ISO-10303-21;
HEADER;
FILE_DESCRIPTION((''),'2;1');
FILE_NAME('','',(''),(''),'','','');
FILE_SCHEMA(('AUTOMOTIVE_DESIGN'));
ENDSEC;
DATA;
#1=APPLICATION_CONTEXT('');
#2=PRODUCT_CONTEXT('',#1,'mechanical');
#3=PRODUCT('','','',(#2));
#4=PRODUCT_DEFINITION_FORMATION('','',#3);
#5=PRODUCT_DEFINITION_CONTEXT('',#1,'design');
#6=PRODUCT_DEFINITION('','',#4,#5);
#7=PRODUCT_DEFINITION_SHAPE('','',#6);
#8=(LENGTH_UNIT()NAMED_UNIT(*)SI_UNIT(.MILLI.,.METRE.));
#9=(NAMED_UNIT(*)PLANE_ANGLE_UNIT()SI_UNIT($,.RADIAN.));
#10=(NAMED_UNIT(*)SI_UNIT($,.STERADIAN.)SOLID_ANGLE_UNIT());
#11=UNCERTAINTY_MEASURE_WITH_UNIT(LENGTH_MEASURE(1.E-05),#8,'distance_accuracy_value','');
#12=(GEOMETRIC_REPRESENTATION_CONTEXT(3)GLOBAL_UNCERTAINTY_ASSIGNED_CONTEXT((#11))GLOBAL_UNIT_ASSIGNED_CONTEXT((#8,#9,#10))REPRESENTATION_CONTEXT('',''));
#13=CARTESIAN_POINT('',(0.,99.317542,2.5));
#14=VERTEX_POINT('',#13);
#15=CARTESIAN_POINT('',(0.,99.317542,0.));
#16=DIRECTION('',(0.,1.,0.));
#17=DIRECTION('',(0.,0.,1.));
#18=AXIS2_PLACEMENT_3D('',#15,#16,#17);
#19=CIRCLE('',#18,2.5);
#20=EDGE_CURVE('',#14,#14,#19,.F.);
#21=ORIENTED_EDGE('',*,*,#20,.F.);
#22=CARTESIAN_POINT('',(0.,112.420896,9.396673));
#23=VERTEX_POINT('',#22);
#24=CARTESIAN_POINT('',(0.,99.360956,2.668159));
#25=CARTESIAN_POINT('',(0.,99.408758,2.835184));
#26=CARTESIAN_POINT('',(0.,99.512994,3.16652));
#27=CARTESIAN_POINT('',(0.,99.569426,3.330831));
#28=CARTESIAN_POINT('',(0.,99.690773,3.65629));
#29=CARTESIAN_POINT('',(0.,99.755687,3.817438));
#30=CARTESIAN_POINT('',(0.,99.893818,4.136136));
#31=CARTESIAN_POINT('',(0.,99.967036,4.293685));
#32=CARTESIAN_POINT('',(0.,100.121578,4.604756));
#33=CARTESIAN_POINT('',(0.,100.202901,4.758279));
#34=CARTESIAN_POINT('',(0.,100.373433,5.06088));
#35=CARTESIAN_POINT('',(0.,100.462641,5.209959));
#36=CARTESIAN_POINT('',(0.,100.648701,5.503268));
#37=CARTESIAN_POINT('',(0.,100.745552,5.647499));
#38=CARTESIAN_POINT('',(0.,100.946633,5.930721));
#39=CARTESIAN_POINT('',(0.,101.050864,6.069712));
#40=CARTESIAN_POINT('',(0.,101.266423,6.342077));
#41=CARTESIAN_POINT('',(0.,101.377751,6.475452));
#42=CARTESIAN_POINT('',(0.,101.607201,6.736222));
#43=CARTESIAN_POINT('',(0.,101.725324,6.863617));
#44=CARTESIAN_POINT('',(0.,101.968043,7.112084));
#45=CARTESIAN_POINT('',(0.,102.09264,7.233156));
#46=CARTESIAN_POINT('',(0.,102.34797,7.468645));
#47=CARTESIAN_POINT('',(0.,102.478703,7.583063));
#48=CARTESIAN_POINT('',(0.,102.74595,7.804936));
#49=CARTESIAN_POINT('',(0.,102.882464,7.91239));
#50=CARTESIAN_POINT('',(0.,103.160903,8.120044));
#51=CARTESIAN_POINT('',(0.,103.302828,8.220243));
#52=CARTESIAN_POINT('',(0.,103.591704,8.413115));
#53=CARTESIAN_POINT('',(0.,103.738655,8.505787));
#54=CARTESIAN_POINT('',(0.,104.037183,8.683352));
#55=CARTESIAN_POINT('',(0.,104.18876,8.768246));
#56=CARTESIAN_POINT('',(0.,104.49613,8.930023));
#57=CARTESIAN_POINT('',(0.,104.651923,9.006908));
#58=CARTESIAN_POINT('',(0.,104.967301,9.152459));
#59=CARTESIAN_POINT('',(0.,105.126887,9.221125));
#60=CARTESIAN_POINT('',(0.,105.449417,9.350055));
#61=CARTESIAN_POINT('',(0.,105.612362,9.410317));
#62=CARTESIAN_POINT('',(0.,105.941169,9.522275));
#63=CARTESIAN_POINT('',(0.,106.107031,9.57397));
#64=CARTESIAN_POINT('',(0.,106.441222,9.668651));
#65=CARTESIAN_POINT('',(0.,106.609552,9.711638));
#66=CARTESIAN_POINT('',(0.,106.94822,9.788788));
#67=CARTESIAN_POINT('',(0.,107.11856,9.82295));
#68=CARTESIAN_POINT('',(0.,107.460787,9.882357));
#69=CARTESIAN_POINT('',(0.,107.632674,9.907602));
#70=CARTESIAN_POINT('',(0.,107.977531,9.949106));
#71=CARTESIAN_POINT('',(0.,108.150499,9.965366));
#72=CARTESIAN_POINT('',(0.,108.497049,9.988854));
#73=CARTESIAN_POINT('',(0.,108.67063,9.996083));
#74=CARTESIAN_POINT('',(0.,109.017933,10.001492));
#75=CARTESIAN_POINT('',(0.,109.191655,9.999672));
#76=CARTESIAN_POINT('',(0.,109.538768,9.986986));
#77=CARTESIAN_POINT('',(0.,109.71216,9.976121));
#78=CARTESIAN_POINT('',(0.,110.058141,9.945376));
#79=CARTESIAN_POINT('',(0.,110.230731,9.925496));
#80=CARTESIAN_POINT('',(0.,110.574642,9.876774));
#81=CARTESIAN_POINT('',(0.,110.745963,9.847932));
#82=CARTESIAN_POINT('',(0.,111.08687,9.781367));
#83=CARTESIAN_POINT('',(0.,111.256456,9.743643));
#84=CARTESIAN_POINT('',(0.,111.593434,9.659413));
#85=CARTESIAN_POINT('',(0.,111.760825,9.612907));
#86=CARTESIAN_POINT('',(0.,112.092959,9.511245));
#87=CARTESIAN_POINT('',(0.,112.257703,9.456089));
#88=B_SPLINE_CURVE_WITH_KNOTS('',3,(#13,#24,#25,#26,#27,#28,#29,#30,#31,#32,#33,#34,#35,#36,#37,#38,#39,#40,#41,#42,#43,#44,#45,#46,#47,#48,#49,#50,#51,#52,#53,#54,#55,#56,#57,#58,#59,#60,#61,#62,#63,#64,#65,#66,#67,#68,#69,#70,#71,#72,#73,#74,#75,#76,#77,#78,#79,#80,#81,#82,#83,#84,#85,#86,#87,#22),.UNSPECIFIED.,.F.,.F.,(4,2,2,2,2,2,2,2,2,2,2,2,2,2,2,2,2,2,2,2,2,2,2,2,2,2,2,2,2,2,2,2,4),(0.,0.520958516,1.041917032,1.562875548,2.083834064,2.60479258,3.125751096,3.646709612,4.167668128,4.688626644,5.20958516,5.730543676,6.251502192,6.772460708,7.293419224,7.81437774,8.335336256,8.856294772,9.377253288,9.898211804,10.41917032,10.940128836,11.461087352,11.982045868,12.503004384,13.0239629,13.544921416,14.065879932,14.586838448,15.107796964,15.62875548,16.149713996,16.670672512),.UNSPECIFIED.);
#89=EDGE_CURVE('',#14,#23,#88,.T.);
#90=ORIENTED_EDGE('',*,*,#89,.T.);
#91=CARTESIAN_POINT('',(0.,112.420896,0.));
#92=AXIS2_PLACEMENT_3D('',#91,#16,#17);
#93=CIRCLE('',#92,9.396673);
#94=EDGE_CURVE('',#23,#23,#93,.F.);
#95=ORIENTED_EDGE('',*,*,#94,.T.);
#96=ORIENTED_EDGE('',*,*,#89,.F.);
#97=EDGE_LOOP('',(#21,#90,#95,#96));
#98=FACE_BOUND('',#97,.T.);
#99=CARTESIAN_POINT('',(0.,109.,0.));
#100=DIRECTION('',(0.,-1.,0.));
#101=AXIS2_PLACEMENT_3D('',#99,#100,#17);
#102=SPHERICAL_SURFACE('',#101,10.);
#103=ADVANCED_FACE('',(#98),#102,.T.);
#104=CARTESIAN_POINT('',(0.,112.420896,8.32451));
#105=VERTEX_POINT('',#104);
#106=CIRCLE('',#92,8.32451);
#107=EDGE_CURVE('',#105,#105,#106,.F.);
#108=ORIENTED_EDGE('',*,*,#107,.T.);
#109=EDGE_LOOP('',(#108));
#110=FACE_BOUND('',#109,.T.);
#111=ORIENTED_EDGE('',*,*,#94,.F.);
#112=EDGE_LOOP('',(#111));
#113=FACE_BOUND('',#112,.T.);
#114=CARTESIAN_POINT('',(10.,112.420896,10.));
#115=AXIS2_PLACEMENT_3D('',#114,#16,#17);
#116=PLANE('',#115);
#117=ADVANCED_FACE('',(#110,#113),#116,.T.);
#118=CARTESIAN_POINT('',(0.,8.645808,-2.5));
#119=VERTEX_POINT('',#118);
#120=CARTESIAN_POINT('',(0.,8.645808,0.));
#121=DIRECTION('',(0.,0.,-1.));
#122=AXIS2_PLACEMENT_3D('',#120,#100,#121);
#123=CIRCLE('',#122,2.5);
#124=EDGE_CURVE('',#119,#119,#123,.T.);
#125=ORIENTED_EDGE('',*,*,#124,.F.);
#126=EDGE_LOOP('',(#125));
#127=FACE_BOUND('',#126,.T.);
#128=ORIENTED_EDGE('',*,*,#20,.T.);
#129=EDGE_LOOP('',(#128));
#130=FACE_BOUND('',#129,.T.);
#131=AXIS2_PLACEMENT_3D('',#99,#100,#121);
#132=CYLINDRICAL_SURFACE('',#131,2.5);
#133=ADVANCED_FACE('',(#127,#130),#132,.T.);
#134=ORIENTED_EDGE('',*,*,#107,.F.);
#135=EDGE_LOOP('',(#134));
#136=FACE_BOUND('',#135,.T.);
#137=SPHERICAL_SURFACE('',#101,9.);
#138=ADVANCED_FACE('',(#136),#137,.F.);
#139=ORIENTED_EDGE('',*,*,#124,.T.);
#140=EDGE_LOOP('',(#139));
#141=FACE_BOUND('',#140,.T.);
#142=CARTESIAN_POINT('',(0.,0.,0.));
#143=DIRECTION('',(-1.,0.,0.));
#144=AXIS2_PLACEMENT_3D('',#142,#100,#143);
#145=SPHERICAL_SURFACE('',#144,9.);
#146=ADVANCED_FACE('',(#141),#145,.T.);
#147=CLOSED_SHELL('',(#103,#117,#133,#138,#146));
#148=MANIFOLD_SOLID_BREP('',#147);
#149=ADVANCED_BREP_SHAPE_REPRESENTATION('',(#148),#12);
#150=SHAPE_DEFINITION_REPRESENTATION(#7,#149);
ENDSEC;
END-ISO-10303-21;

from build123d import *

# Parameters (mm, degrees)
BOSS_EXTRUDE1_REACH             = 24.045
BOSS_EXTRUDE1_END_RADIUS        = 9
SKETCH3_R                       = 2.5
BOSS_EXTRUDE1_DIRECTION_2_DEPTH = 100
CUT_EXTRUDE1_DEPTH              = 10
CUT_EXTRUDE1_DEPTH_BACK         = 10
SKETCH5_W                       = 20
SKETCH5_H                       = 8.579104118


# Read off the part's stored shape, not the designer's step: Shell1
with BuildPart() as part:
    # Sketch1 → Revolve1 (revolve)
    with BuildSketch(Plane.XY):
        with BuildLine():
            Line((0, -9), (0, 9))
            ThreePointArc((0, 9), (9, 0), (0, -9))
        make_face()
    revolve(axis=Axis((0, -9, 0), (0, 1, 0)))

    # Boss-Extrude1: up to this sphere (the profile starts outside it)
    boss_extrude1_end = Location((0, 0, 0)) * Sphere(BOSS_EXTRUDE1_END_RADIUS, mode=Mode.PRIVATE)
    # Sketch3 → Boss-Extrude1 (add, up to the surface)
    with BuildSketch(Plane(origin=(0, 9, 0), x_dir=(1, 0, 0), z_dir=(0, 1, 0)), mode=Mode.PRIVATE) as boss_extrude1_sk1:
        with Locations(Location((0, 0, 0), (0, 0, 90))):
            Circle(SKETCH3_R)
    boss_extrude1_tool1 = extrude(boss_extrude1_sk1.sketch, amount=-BOSS_EXTRUDE1_REACH, mode=Mode.PRIVATE) - boss_extrude1_end
    add(boss_extrude1_tool1.solids().sort_by_distance((0, 9, 0))[0])

    # Sketch3 → Boss-Extrude1 direction 2 (add)
    with BuildSketch(Plane(origin=(0, 9, 0), x_dir=(1, 0, 0), z_dir=(0, 1, 0))):
        with Locations(Location((0, 0, 0), (0, 0, 90))):
            Circle(SKETCH3_R)
    extrude(amount=BOSS_EXTRUDE1_DIRECTION_2_DEPTH)

    # Sketch4 → Revolve2 (revolve)
    with BuildSketch(Plane(origin=(0, 0, 0), x_dir=(0, 0, -1), z_dir=(1, 0, 0))):
        with BuildLine():
            Line((0, 109), (0, 99))
            ThreePointArc((0, 99), (10, 109), (0, 119))
            Line((0, 119), (0, 109))
        make_face()
    revolve(axis=Axis((0, 109, 0), (0, 1, 0)))

    # Sketch5 → Cut-Extrude1 (cut, two sides: drawn at the far end of the back side and taken through both)
    with BuildSketch(Plane(origin=(0, 0, 0), x_dir=(0, 0, -1), z_dir=(1, 0, 0)).offset(-CUT_EXTRUDE1_DEPTH_BACK)):
        with Locations((0, 116.710447941)):
            Rectangle(SKETCH5_W, SKETCH5_H)
    extrude(amount=CUT_EXTRUDE1_DEPTH + CUT_EXTRUDE1_DEPTH_BACK, mode=Mode.SUBTRACT)

    # Shell1 outline → Shell1 (revolve, cut)
    with BuildSketch(Plane.XY):
        with BuildLine():
            Line((0, 112.42089589), (0, 100))
            ThreePointArc((0, 100), (7.476231103, 103.989414356), (8.324510274, 112.42089589))
            Line((8.324510274, 112.42089589), (0, 112.42089589))
        make_face()
    revolve(axis=Axis((0, 0, 0), (0, 1, 0)), mode=Mode.SUBTRACT)


solid = part.part
